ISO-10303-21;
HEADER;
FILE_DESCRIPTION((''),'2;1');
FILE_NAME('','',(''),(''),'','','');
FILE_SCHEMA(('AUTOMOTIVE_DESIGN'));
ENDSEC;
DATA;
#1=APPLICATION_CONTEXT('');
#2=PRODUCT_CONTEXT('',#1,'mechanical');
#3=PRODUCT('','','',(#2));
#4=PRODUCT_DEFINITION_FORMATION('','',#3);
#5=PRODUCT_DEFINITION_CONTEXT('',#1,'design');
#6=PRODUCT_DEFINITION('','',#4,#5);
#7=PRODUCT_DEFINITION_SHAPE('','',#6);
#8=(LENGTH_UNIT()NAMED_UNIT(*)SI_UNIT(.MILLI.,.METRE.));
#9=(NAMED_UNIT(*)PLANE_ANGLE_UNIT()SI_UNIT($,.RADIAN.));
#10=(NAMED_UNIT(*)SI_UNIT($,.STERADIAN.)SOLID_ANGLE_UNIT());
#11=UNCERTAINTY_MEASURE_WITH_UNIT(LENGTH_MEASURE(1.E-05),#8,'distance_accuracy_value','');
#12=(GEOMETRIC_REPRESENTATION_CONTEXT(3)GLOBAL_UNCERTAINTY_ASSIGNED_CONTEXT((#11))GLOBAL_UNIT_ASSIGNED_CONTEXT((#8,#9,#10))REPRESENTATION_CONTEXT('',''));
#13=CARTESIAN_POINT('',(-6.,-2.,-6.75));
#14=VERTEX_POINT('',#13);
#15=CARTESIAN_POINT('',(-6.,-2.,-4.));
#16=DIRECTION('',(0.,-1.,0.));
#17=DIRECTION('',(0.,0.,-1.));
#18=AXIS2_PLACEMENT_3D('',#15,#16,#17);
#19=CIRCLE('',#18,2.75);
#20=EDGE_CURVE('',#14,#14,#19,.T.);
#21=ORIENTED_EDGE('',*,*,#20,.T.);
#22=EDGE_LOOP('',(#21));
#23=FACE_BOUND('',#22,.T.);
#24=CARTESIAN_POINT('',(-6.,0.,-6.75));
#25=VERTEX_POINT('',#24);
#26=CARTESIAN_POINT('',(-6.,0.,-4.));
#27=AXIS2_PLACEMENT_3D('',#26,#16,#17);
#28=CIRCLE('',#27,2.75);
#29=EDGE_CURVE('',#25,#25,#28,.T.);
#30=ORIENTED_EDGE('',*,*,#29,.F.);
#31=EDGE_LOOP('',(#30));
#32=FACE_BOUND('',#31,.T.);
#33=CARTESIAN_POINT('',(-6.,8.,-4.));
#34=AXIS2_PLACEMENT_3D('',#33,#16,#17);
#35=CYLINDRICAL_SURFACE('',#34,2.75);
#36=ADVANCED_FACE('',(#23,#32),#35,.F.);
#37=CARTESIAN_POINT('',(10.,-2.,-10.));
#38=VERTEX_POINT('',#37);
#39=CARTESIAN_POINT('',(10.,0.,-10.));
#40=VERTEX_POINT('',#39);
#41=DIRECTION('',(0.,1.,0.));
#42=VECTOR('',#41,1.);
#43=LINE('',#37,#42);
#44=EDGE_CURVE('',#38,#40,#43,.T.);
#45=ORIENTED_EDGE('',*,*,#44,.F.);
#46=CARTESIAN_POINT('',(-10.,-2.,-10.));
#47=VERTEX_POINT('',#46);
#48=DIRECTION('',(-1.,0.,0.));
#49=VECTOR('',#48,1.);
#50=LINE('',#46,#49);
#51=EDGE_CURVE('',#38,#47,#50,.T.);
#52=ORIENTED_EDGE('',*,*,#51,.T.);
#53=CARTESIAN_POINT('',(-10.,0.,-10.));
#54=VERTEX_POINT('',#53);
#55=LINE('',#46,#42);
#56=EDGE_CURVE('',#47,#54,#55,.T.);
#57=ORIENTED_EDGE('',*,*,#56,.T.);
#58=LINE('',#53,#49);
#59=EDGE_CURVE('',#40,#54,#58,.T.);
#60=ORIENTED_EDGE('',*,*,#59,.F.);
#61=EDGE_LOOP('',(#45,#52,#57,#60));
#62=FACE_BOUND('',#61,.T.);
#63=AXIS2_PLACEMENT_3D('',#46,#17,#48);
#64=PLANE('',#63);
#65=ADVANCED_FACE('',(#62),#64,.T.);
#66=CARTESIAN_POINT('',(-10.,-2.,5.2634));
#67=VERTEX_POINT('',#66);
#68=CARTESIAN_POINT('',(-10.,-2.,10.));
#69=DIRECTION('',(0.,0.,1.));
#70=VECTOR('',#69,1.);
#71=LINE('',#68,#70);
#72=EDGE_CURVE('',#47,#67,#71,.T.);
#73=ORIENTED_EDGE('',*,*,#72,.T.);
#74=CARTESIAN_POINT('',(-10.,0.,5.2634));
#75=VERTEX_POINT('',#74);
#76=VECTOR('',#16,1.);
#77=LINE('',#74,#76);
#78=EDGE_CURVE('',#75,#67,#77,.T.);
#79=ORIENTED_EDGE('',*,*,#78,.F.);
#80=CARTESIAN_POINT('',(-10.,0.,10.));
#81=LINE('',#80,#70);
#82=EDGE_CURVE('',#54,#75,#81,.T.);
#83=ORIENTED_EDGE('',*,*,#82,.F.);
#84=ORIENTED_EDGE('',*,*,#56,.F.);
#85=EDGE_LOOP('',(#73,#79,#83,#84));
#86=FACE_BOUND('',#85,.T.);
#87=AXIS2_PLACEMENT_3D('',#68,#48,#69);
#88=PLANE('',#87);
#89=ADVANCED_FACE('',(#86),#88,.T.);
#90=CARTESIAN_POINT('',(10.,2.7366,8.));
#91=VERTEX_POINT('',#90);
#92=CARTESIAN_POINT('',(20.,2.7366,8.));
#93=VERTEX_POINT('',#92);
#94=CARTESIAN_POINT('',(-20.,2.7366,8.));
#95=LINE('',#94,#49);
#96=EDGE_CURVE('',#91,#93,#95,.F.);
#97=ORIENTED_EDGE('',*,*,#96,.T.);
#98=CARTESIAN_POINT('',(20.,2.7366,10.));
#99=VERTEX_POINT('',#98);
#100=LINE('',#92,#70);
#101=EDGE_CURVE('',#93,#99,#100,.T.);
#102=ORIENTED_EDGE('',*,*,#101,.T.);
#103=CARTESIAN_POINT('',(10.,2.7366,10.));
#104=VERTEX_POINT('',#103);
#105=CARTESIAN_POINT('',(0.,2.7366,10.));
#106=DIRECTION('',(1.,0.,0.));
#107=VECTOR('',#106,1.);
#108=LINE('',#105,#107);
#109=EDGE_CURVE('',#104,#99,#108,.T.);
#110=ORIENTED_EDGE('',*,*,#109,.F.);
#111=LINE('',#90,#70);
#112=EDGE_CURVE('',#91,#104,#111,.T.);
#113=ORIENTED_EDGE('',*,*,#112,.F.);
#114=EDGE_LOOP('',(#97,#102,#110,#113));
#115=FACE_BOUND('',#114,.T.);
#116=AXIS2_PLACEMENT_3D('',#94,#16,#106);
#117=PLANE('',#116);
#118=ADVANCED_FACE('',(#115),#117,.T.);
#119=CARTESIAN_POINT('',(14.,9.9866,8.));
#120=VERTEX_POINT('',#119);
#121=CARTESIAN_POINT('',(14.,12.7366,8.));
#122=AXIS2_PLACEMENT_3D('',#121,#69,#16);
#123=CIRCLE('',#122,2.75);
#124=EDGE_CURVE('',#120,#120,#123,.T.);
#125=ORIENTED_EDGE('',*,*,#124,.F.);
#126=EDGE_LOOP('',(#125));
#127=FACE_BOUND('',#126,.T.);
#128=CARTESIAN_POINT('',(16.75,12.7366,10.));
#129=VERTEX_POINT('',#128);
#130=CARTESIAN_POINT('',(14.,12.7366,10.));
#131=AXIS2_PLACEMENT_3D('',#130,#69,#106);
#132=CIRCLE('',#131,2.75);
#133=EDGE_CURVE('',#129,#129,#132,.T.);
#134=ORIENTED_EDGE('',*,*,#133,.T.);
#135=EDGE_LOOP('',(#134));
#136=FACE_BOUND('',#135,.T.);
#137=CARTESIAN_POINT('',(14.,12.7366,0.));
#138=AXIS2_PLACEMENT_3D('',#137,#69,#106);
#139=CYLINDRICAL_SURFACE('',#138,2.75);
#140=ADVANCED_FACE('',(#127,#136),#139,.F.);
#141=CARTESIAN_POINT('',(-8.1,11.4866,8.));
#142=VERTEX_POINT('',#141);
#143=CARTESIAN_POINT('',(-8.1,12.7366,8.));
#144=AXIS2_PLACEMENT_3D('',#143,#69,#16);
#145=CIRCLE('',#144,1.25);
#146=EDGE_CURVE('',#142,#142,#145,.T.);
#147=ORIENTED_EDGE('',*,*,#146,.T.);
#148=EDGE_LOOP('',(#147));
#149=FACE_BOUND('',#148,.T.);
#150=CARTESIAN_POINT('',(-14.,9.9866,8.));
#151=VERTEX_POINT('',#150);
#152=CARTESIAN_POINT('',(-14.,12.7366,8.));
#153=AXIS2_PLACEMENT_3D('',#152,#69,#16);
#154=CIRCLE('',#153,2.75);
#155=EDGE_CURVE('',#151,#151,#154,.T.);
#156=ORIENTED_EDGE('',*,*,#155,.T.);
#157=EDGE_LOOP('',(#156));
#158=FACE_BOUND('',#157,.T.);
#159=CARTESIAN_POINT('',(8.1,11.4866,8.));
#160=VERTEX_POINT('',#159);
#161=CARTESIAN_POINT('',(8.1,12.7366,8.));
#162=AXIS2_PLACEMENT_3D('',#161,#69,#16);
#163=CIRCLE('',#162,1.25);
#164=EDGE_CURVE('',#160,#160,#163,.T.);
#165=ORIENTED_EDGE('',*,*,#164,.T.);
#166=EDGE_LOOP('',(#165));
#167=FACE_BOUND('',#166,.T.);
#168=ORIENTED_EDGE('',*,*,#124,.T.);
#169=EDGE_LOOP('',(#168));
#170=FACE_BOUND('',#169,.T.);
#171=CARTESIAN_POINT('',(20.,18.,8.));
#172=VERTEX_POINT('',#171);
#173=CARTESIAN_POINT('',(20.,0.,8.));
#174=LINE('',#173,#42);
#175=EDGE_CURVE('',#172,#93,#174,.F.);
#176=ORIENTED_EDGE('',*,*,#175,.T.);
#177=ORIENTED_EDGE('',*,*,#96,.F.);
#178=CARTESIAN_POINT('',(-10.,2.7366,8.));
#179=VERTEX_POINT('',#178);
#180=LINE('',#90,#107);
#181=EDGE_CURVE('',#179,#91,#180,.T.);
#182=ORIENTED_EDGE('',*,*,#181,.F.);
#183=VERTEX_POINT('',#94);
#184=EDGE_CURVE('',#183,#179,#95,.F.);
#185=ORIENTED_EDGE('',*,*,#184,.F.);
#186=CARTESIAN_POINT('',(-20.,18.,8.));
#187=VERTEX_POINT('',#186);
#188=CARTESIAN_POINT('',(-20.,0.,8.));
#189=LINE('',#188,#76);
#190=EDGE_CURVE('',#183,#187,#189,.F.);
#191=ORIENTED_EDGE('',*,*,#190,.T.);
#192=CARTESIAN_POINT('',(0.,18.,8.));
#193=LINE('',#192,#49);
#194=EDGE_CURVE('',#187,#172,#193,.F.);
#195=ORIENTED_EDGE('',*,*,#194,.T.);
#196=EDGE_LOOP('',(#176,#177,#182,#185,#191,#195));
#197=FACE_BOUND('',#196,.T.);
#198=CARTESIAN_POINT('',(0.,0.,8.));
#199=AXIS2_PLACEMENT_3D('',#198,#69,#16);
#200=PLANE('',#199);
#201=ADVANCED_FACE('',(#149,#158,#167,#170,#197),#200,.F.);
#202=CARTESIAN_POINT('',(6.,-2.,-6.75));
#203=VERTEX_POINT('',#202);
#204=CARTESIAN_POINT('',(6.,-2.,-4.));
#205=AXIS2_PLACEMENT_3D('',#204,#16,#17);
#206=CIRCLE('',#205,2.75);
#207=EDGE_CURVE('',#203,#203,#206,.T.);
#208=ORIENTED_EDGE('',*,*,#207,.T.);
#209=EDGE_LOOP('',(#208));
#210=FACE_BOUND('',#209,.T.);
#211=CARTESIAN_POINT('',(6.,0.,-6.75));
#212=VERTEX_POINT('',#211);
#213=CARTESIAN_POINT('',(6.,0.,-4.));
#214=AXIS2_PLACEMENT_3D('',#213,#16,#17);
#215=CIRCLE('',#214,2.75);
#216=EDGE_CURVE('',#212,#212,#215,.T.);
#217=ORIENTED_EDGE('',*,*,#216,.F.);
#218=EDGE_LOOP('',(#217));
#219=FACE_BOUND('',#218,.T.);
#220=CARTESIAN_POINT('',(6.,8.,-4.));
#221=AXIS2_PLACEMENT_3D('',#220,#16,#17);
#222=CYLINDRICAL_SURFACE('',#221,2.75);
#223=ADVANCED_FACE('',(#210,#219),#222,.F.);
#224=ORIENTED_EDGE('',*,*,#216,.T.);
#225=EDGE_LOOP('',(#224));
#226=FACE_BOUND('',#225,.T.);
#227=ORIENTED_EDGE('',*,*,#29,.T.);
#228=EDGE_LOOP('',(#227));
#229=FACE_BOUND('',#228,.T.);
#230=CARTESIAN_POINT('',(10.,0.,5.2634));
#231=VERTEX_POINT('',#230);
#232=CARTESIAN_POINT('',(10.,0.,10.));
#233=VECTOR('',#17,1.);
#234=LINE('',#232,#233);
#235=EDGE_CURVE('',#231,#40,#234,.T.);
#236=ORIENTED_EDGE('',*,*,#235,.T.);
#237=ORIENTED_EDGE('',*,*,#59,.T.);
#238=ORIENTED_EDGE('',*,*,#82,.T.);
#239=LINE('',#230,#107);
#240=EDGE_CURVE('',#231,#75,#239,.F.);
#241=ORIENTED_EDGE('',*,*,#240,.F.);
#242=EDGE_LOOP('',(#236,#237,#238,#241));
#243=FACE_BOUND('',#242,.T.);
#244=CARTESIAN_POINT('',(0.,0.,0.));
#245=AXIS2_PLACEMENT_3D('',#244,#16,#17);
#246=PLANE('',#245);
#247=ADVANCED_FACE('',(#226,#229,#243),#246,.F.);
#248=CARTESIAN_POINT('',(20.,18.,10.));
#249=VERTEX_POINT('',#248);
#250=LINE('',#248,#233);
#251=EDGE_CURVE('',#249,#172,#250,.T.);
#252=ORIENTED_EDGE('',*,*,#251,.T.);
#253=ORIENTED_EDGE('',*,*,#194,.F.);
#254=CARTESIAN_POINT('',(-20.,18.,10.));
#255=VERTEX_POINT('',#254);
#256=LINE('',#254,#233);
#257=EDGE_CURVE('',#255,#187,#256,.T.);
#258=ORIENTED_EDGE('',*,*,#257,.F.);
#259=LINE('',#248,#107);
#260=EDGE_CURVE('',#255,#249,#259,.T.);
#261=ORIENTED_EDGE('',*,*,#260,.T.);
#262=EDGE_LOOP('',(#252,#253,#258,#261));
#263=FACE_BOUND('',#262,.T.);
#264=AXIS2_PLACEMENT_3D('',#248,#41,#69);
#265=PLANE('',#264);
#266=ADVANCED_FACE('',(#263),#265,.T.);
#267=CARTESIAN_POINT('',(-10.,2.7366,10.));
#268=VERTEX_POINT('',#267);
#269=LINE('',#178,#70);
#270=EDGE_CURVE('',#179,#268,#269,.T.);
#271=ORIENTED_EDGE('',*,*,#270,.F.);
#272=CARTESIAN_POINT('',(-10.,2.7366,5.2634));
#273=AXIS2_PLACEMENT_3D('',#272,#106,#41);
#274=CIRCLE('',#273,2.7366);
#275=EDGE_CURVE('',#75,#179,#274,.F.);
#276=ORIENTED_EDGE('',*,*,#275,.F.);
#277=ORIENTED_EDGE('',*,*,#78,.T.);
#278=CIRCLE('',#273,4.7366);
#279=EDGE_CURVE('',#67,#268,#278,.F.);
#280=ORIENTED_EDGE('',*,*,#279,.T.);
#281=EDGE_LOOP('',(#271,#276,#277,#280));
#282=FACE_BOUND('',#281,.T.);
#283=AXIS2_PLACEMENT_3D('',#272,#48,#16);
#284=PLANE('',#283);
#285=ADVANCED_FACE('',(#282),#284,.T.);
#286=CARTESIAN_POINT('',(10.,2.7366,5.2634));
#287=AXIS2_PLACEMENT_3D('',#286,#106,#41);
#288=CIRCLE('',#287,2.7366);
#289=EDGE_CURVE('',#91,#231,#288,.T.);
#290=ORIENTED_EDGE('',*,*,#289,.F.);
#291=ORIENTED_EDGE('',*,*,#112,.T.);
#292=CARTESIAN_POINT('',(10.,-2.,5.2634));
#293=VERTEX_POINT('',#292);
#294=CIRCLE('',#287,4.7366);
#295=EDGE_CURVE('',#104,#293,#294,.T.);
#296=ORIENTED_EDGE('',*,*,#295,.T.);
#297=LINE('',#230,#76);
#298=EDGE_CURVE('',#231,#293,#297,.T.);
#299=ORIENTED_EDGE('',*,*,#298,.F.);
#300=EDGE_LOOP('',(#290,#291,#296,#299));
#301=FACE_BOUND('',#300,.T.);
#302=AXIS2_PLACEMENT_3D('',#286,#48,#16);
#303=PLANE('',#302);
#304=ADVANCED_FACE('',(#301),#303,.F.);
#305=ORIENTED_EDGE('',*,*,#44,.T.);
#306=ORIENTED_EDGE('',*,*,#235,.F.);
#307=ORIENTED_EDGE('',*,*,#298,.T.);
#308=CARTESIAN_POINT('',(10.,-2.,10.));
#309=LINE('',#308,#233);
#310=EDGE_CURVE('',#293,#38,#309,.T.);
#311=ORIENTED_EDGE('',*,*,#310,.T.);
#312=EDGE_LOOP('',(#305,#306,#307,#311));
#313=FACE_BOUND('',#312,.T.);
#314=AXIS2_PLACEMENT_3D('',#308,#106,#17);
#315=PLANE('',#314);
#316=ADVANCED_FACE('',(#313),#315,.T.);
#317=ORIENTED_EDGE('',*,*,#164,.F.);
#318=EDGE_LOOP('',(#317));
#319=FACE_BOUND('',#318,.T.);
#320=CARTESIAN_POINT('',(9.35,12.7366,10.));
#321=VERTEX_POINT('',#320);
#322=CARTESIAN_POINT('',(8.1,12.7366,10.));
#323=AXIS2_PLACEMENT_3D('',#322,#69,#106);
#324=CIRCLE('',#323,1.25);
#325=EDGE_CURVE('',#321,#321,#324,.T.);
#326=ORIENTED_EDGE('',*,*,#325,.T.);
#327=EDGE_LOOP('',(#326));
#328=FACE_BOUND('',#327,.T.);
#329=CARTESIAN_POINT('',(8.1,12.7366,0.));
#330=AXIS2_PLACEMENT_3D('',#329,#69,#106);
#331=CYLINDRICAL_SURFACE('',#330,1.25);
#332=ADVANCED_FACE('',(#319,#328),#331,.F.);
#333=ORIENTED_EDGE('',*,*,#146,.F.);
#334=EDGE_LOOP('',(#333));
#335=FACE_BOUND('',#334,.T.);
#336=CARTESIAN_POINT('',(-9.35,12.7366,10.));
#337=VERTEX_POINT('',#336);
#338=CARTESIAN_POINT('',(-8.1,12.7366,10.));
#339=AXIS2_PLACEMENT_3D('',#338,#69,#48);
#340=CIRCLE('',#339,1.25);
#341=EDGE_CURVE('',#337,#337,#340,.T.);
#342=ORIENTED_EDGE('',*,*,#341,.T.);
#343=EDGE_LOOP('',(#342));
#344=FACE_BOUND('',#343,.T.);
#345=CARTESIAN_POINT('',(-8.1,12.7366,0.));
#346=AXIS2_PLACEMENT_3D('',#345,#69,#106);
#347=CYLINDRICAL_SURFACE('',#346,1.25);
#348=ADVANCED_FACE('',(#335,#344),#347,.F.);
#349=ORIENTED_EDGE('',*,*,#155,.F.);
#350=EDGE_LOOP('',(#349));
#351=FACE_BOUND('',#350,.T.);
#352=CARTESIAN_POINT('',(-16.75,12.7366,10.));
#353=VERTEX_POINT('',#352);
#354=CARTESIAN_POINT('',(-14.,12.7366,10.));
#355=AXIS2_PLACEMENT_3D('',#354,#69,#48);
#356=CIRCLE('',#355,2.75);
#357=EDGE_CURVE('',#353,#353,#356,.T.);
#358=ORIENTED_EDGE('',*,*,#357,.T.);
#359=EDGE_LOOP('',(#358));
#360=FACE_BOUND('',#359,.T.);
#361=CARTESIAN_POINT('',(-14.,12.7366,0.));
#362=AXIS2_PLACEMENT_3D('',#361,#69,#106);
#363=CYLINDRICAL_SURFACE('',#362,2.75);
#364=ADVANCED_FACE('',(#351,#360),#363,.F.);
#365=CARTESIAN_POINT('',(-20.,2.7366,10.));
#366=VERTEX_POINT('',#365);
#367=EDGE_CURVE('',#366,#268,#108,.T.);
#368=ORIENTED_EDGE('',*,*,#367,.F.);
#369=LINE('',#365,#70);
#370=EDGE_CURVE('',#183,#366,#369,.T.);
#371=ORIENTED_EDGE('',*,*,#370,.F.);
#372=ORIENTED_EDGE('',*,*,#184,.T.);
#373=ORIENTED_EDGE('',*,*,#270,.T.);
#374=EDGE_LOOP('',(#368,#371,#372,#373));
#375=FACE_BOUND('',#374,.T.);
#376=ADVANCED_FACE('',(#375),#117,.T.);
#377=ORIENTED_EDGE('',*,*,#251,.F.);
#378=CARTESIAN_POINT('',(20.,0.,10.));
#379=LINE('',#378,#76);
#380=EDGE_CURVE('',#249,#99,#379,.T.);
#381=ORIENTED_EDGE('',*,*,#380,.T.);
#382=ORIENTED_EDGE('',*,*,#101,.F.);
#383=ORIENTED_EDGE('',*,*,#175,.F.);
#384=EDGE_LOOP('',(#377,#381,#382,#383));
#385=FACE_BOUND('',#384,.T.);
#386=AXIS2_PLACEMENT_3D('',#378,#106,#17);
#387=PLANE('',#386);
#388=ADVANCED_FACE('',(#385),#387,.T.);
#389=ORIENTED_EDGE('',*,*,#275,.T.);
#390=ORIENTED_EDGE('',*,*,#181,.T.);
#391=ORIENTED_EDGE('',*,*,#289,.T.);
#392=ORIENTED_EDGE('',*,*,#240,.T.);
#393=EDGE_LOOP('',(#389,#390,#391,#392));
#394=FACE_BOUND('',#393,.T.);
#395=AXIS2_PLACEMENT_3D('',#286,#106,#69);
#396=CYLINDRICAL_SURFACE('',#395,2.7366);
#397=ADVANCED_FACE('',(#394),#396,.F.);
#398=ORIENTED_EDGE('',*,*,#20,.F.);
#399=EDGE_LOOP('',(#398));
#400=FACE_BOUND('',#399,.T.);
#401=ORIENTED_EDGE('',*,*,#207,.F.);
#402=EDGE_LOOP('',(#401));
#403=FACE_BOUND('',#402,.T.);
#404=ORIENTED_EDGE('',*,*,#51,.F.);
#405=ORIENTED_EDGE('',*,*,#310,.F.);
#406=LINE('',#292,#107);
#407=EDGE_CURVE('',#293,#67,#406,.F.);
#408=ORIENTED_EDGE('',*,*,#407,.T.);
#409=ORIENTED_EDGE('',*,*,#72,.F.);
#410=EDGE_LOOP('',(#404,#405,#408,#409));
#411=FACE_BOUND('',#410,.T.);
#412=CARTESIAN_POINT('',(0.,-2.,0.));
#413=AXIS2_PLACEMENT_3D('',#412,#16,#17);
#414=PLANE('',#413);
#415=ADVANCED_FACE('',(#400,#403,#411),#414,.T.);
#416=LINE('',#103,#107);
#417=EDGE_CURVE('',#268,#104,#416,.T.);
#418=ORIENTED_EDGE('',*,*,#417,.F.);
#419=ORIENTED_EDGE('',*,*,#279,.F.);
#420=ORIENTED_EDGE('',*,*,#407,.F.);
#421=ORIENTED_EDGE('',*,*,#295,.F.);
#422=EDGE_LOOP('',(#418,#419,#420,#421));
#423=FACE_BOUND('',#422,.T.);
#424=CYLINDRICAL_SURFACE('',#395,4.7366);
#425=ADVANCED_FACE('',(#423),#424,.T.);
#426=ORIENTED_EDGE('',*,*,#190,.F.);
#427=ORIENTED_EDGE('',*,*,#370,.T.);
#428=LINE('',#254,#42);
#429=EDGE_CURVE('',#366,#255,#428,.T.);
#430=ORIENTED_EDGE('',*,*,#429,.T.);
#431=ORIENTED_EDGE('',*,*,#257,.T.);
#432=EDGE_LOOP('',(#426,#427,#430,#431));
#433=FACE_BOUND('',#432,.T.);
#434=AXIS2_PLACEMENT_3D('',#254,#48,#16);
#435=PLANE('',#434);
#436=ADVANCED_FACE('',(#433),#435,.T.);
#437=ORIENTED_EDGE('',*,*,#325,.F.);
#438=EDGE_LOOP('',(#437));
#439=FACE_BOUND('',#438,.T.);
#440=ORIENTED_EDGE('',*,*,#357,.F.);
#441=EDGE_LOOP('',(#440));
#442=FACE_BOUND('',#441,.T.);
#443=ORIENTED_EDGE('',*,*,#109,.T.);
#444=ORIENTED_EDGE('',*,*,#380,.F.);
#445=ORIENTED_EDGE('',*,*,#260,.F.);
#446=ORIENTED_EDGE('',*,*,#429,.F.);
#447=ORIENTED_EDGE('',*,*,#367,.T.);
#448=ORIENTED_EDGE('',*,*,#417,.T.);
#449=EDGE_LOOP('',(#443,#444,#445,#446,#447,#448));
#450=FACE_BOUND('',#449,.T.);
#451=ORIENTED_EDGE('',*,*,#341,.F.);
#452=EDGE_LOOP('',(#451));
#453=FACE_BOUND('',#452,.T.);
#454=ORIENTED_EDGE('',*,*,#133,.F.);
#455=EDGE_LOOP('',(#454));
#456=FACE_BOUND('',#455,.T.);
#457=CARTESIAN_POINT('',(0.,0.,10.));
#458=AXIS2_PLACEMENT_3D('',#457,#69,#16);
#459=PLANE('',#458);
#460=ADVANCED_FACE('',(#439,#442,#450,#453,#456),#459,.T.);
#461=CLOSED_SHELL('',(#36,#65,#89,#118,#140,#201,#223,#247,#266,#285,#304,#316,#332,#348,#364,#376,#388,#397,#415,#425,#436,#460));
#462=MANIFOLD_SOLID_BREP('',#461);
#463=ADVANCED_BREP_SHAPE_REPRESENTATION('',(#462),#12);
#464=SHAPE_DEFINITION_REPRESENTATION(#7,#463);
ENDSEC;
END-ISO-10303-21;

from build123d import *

# Parameters (mm, degrees)
SKETCH_1_W                       = 20
SKETCH_1_H                       = 20
SM_BASE_FLANGE_1_DEPTH           = 2
SM_EDGE_FLANGE_1_STRIP_W         = 13.4732
SM_EDGE_FLANGE_1_STRIP_H         = 2
SM_EDGE_FLANGE_1_STRIP_CUT_DEPTH = 20
SM_EDGE_FLANGE_1_DEPTH           = 20
SM_EDGE_FLANGE_1_PROFILE_W       = 40
SM_EDGE_FLANGE_1_PROFILE_H       = 15.2634
SM_EDGE_FLANGE_1_FLAT_DEPTH      = 2
SKETCH_9_R                       = 2.75
SKETCH_9_R_2                     = 1.25
CUT_EXTRUDE_1_DEPTH              = 10
SKETCH_10_R                      = 2.75
CUT_EXTRUDE_2_DEPTH              = 10


# Sheet-metal steps are written as plain solids
with BuildPart() as part:
    # Sketch 1 → 基体-法兰1 (new body)
    with BuildSketch(Plane(origin=(0, 0, 0), x_dir=(1, 0, 0), z_dir=(0, 1, 0))):
        Rectangle(SKETCH_1_W, SKETCH_1_H)
    extrude(amount=-SM_BASE_FLANGE_1_DEPTH)

    # 边线-法兰1 strip (across the edge) → 边线-法兰1 strip cut (cut)
    with BuildSketch(Plane(origin=(-10, 0, 10), x_dir=(0, 0, -1), z_dir=(1, 0, 0))):
        with Locations((-2, -1)):
            Rectangle(SM_EDGE_FLANGE_1_STRIP_W, SM_EDGE_FLANGE_1_STRIP_H)
    extrude(amount=SM_EDGE_FLANGE_1_STRIP_CUT_DEPTH, mode=Mode.SUBTRACT)

    # 边线-法兰1 bend section (across the edge) → 边线-法兰1 (add)
    with BuildSketch(Plane(origin=(-10, 0, 10), x_dir=(0, 0, -1), z_dir=(1, 0, 0))):
        with BuildLine():
            Line((0, 2.7366), (2, 2.7366))
            ThreePointArc((2, 2.7366), (2.801531583, 0.801531583), (4.7366, 0))
            Line((4.7366, 0), (4.7366, -2))
            ThreePointArc((4.7366, -2), (1.38731802, -0.61268198), (0, 2.7366))
        make_face()
    extrude(amount=SM_EDGE_FLANGE_1_DEPTH)

    # 边线-法兰1 profile (on flange) → 边线-法兰1 flat (add)
    with BuildSketch(Plane(origin=(0, 0, 10), x_dir=(-1, 0, 0), z_dir=(0, 0, -1))):
        with Locations((0, 10.3683)):
            Rectangle(SM_EDGE_FLANGE_1_PROFILE_W, SM_EDGE_FLANGE_1_PROFILE_H)
    extrude(amount=SM_EDGE_FLANGE_1_FLAT_DEPTH)

    # 草图9 → 切除-拉伸1 (cut)
    with BuildSketch(Plane.XY.offset(10)):
        with Locations((14, 12.7366)):
            Circle(SKETCH_9_R)
        with Locations((8.1, 12.7366)):
            Circle(SKETCH_9_R_2)
        with Locations(Location((-8.1, 12.7366, 0), (0, 0, 270))):
            Circle(SKETCH_9_R_2)
        with Locations(Location((-14, 12.7366, 0), (0, 0, 270))):
            Circle(SKETCH_9_R)
    extrude(amount=-CUT_EXTRUDE_1_DEPTH, mode=Mode.SUBTRACT)

    # 草图10 → 切除-拉伸2 (cut)
    with BuildSketch(Plane.XZ.offset(2)):
        with Locations(Location((6, -4, 0), (0, 0, 270))):
            Circle(SKETCH_10_R)
        with Locations(Location((-6, -4, 0), (0, 0, 270))):
            Circle(SKETCH_10_R)
    extrude(amount=-CUT_EXTRUDE_2_DEPTH, mode=Mode.SUBTRACT)


solid = part.part
